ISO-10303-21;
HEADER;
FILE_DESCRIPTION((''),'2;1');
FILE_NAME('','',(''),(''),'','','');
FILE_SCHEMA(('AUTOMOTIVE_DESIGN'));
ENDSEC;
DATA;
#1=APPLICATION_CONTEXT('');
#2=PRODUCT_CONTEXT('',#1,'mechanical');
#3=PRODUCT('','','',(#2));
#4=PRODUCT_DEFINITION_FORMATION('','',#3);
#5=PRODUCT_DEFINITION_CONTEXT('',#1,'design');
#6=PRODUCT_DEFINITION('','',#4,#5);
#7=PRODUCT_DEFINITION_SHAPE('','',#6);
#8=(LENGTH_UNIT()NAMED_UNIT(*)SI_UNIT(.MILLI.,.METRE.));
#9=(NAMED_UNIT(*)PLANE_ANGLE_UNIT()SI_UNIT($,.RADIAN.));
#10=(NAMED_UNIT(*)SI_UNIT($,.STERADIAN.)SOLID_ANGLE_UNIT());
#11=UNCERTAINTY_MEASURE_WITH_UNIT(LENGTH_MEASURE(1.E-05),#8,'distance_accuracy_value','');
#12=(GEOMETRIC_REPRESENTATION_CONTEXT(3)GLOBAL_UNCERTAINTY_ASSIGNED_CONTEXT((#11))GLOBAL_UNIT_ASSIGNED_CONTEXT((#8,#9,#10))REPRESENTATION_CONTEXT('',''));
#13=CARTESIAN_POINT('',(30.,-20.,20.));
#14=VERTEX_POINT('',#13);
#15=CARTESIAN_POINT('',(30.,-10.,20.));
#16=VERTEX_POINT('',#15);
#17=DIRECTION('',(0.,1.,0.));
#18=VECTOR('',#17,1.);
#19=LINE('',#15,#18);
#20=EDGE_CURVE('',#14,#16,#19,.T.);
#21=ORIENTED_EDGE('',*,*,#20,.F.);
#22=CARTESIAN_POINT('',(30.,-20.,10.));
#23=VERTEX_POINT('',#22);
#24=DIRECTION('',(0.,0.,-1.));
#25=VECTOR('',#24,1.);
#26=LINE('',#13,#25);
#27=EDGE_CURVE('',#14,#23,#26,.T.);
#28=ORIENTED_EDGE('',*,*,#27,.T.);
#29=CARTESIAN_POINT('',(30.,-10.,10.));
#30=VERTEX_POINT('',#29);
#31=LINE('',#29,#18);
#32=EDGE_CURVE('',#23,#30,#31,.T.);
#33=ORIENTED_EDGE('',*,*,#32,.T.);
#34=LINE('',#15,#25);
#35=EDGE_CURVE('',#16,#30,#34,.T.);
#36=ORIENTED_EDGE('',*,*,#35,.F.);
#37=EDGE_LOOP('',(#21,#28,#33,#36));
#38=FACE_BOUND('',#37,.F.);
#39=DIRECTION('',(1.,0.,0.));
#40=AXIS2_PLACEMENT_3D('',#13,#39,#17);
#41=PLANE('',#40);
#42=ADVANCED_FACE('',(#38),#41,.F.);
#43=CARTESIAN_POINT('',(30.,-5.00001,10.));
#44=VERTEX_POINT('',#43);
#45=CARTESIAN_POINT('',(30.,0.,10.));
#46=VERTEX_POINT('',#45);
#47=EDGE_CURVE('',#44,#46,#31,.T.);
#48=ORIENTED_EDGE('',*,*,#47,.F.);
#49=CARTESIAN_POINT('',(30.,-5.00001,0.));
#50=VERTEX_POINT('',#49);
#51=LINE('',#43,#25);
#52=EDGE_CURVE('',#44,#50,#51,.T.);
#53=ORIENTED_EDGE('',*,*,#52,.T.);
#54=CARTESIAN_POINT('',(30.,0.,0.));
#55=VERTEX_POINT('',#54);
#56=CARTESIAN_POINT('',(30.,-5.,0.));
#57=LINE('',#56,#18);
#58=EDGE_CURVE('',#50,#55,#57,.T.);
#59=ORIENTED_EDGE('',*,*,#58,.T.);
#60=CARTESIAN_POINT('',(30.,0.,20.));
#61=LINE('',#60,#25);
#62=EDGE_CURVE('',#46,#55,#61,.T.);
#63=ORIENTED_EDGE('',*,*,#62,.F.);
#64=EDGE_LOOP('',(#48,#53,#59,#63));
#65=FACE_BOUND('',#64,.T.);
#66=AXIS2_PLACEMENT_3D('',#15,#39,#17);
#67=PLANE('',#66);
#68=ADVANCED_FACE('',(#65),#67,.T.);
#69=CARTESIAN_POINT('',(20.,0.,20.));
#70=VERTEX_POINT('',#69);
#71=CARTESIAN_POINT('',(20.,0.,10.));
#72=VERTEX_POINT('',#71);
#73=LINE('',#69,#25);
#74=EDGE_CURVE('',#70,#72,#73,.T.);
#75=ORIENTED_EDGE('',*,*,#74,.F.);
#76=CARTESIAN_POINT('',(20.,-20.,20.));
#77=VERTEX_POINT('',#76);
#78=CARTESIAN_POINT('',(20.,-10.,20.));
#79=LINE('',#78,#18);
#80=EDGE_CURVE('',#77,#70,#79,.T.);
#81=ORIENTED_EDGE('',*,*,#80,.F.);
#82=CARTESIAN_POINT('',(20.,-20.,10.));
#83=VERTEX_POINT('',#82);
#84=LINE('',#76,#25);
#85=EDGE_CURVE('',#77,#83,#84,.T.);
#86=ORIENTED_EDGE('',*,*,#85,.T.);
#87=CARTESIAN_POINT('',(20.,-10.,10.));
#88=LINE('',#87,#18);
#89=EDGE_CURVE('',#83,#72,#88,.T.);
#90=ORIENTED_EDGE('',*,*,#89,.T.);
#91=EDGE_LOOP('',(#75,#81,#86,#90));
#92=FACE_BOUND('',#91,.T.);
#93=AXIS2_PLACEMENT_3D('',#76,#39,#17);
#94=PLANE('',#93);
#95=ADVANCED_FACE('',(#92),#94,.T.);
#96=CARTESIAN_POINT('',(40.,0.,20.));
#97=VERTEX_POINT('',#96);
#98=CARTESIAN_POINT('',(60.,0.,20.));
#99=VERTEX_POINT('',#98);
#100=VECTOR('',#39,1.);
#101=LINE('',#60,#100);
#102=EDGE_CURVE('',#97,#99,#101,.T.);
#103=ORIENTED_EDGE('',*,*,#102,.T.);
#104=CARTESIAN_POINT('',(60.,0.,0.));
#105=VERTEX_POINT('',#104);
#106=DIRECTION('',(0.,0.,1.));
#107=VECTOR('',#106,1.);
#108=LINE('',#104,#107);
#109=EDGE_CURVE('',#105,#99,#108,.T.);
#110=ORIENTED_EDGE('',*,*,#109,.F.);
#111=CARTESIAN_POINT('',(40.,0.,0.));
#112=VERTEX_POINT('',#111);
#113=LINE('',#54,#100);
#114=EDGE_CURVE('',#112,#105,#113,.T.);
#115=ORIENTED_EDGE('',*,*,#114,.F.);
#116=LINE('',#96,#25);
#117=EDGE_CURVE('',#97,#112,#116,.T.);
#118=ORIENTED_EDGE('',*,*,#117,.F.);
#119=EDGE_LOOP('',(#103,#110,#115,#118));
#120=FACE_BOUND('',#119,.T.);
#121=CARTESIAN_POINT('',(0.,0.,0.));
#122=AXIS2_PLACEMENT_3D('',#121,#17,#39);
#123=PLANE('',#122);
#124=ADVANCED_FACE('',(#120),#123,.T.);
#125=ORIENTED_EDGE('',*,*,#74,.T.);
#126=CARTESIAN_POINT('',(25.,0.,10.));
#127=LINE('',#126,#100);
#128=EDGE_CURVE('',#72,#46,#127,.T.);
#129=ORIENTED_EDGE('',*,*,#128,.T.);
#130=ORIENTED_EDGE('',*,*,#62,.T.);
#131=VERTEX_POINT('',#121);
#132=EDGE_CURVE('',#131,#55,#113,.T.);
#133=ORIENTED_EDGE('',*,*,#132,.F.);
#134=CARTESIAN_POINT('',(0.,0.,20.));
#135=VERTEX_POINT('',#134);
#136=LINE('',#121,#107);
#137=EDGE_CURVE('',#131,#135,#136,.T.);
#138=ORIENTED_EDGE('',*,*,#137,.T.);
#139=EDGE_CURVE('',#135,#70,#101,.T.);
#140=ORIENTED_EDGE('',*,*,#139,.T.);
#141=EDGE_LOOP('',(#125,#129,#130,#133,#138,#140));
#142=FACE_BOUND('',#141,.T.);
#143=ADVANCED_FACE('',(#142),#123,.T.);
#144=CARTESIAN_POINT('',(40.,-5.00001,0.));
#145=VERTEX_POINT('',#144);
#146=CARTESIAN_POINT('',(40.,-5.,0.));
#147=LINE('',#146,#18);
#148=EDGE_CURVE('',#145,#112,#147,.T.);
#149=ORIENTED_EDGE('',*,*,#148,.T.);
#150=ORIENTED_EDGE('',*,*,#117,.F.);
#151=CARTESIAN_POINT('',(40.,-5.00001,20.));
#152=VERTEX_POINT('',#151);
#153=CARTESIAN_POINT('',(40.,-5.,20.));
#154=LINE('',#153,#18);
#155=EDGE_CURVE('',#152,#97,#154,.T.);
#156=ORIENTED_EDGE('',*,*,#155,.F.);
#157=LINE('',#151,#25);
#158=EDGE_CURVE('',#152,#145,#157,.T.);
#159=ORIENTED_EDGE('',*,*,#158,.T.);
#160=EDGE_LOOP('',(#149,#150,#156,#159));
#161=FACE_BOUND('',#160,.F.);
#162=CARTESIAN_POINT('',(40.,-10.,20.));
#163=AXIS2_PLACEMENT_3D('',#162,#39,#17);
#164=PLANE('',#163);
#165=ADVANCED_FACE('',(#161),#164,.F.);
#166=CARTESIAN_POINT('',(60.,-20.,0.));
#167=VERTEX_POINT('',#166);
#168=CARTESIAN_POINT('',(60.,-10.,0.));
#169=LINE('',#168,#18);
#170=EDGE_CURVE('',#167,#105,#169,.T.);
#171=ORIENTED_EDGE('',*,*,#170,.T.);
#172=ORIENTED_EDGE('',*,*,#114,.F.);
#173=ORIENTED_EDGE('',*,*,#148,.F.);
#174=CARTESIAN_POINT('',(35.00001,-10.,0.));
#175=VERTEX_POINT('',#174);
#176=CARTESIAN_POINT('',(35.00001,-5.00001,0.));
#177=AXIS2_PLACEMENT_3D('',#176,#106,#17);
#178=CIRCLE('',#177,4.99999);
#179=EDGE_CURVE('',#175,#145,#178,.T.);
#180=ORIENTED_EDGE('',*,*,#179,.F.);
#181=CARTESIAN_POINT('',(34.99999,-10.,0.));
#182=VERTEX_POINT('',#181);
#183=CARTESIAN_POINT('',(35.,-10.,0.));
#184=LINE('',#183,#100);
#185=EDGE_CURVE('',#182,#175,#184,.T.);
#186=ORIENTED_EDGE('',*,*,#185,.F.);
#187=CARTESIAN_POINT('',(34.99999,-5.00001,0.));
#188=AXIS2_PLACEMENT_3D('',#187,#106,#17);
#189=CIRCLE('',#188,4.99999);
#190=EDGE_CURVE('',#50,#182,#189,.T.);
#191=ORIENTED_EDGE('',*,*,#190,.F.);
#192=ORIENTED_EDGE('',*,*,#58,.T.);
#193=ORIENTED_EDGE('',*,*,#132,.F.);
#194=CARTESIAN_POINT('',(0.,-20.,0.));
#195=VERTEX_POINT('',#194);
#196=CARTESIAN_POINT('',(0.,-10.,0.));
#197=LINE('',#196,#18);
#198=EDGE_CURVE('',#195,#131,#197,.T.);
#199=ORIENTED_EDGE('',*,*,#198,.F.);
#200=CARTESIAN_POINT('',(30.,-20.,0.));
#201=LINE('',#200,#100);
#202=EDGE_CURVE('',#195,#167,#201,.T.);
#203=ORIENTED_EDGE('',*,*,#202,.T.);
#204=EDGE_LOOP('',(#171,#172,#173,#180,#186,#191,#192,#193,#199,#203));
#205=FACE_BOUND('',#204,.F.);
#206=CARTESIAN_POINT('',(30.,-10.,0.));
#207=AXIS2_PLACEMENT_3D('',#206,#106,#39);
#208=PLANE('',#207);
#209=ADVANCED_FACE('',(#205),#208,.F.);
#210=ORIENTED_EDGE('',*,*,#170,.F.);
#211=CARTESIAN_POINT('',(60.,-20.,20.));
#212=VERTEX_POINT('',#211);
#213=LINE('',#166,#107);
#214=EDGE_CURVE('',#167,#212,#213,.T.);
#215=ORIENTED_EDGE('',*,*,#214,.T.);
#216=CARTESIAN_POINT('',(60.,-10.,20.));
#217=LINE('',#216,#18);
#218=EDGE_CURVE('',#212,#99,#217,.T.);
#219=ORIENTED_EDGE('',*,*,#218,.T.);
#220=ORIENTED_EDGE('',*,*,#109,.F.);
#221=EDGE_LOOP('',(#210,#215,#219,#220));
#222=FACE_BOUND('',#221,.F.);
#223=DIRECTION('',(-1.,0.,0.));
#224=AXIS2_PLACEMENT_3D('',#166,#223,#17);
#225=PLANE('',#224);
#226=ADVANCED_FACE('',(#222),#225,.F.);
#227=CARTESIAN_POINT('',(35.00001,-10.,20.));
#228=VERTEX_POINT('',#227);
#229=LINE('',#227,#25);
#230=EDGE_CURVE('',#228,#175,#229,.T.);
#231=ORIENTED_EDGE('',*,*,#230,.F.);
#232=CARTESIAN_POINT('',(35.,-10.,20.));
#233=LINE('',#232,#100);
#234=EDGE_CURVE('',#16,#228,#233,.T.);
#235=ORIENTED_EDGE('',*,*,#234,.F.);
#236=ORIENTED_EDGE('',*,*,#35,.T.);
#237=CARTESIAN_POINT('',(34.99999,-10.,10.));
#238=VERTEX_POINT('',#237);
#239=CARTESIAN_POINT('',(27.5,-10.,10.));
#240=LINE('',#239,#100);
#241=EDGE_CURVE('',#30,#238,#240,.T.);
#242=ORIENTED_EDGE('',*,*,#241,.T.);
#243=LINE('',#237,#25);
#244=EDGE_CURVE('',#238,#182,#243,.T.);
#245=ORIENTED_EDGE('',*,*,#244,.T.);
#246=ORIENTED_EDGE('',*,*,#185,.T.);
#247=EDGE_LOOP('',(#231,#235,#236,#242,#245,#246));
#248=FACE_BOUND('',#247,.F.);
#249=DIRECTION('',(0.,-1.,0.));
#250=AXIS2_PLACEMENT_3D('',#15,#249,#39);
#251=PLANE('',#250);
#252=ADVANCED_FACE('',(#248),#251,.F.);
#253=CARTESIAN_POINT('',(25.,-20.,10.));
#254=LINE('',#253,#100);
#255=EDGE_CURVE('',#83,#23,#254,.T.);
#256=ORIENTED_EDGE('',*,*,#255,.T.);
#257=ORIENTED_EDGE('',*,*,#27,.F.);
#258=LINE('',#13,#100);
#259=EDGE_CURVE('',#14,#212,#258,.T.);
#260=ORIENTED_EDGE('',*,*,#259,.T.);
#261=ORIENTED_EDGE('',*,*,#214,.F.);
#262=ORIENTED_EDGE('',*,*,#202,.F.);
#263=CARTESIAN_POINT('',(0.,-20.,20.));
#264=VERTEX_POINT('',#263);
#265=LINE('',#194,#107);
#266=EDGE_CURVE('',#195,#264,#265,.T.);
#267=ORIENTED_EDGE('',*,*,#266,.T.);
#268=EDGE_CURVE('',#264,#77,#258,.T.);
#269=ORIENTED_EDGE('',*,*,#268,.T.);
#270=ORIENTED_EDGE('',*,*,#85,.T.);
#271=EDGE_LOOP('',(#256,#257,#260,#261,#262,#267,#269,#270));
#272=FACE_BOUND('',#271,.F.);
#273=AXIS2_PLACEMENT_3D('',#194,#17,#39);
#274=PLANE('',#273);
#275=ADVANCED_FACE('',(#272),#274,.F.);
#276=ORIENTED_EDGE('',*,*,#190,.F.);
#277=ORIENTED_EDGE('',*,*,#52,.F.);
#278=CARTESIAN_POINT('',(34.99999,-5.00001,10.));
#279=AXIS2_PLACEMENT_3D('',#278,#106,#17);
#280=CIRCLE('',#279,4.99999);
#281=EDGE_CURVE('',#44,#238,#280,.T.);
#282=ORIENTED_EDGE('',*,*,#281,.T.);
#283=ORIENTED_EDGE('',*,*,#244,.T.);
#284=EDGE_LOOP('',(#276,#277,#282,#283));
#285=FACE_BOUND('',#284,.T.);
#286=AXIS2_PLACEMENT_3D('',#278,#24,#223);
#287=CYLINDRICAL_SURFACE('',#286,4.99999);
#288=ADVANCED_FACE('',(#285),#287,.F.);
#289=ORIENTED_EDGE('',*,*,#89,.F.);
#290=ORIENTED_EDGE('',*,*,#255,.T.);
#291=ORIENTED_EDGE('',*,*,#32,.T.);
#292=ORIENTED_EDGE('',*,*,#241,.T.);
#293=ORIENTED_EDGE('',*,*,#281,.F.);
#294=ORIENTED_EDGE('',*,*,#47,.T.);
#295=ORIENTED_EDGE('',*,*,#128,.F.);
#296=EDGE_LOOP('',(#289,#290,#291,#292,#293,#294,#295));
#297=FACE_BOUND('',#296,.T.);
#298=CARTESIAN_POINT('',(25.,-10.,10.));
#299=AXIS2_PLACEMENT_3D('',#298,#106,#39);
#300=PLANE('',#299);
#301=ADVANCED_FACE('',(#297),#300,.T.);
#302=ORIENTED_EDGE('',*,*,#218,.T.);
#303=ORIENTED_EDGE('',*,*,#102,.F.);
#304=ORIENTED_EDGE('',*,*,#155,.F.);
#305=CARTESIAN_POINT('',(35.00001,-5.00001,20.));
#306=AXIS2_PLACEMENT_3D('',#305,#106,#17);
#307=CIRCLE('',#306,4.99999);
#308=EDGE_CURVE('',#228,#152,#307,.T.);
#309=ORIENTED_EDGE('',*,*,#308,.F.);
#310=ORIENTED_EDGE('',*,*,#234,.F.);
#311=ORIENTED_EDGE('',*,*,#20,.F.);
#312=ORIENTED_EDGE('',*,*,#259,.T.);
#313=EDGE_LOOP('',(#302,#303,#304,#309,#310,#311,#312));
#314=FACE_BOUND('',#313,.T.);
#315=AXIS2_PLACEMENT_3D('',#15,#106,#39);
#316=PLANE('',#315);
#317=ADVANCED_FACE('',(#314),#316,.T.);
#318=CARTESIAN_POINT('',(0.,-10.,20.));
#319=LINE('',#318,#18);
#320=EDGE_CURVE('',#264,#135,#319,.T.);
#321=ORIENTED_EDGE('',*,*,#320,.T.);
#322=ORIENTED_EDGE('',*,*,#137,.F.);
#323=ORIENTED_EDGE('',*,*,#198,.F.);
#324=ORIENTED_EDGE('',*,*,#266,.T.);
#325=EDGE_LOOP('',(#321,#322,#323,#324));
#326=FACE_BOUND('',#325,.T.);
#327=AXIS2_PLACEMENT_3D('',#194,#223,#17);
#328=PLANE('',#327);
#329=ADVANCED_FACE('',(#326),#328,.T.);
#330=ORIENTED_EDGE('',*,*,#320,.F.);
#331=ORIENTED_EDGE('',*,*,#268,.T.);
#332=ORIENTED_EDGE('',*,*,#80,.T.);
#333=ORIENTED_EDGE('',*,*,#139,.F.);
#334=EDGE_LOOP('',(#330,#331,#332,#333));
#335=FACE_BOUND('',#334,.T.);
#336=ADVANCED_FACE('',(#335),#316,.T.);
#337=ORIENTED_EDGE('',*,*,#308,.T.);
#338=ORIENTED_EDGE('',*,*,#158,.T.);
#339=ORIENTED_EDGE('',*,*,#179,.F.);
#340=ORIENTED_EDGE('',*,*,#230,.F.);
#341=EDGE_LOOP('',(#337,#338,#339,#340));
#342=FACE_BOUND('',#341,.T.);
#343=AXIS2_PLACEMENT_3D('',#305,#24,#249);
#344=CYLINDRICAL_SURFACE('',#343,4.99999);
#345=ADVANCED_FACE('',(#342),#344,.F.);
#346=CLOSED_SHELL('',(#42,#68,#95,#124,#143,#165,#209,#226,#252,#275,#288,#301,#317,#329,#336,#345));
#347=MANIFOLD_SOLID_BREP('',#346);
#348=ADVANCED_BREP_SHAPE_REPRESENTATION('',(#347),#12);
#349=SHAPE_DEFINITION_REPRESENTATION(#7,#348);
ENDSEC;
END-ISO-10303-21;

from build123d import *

# Parameters (mm, degrees)
F0_W     = 60
F0_H     = 20
F1_DEPTH = 20
F2_W     = 10
F2_H     = 20
F3_DEPTH = 10
F4_W     = 10
F4_H     = 10
F5_DEPTH = 20
F6_R     = 4.99999


# Not quite as in the source:
# - a fillet or chamfer is up to 0.001 mm smaller than in the source, because OpenCascade refuses the exact size


with BuildPart() as f1:
    # F0 (on Top) → F1 (new body)
    with BuildSketch(Plane.XY):
        with Locations((30, -10)):
            Rectangle(F0_W, F0_H)
    extrude(amount=F1_DEPTH)

    # F2 (on face) → F3 (cut)
    with BuildSketch(Plane.XY.offset(20)):
        with Locations((25, -10)):
            Rectangle(F2_W, F2_H)
    extrude(amount=-F3_DEPTH, mode=Mode.SUBTRACT)

    # F4 (on face) → F5 (cut)
    with BuildSketch(Plane.XY.offset(20)):
        with Locations((35, -5)):
            Rectangle(F4_W, F4_H)
    extrude(amount=-F5_DEPTH, mode=Mode.SUBTRACT)

    # F6 (radius 5 in the source; OpenCascade refuses exactly that, so slightly less here)
    f6_edges = [f1.edges().sort_by_distance(p)[0] for p in [
        (30, -10, 5),
        (40, -10, 10),
    ]]
    fillet(f6_edges, radius=F6_R)


solid = f1.part
